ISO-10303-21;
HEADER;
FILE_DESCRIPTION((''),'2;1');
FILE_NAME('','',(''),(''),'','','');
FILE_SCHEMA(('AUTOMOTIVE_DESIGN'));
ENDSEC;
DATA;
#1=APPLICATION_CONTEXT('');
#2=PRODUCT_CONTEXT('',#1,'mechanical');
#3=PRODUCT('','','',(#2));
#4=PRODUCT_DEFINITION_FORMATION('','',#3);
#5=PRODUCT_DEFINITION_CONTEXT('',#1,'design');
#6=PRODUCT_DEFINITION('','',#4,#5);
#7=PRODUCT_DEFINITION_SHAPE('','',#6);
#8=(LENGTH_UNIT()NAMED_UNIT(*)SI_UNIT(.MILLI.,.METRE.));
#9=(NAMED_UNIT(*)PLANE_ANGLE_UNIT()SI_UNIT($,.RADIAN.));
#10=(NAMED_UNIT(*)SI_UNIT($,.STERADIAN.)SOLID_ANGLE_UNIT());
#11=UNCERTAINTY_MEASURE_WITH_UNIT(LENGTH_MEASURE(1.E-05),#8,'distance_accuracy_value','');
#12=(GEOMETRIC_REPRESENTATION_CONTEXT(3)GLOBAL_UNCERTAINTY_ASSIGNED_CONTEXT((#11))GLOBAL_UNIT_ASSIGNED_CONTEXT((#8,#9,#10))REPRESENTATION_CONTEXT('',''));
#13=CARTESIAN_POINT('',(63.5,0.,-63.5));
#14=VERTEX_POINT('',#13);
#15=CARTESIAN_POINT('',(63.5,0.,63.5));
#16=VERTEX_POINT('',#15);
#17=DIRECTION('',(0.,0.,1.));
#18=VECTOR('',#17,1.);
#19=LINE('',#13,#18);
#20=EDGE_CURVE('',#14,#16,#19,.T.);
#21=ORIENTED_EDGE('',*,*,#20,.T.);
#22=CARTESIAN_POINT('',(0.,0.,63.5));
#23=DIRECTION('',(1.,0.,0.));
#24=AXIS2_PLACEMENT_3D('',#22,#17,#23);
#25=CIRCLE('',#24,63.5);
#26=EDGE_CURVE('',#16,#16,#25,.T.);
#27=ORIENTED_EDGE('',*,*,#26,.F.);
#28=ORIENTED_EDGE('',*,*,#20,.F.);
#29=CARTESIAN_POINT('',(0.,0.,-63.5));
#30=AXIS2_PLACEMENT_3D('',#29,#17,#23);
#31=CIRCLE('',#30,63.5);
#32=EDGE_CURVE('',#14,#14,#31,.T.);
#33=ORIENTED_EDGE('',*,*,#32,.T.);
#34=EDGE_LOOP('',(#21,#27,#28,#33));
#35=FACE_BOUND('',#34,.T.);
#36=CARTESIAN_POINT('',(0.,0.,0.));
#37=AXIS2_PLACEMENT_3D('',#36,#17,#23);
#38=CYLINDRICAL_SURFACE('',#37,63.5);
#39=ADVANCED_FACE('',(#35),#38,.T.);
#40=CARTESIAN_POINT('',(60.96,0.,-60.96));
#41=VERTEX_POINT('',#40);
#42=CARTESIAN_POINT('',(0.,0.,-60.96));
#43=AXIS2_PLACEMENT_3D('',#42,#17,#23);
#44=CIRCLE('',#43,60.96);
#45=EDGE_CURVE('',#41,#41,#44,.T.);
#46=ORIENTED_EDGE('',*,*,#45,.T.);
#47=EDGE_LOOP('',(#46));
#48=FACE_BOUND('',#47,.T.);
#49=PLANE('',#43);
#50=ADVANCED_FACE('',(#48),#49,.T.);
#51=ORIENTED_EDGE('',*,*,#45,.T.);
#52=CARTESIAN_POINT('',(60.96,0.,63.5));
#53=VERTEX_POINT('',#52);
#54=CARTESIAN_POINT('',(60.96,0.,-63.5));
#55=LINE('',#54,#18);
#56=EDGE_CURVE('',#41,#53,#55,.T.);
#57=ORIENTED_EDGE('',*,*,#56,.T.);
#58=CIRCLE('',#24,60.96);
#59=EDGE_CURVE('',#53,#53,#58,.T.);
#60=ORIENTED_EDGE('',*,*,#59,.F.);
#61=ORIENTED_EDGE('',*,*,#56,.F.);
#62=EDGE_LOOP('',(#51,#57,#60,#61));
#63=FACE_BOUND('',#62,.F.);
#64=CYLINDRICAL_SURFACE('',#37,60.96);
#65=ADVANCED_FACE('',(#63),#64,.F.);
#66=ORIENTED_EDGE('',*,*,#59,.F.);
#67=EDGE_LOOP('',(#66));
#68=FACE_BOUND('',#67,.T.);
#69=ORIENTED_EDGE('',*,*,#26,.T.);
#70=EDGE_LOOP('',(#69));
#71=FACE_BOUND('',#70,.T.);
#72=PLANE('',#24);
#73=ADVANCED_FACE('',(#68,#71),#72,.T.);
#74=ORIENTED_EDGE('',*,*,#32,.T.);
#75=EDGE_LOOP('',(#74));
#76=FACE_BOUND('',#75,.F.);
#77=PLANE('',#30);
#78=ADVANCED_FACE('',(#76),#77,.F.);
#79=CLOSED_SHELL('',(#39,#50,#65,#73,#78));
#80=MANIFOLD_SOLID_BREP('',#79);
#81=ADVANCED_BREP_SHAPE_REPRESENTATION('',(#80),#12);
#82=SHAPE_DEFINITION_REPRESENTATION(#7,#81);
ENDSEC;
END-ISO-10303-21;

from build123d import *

# Parameters (mm, degrees)
F0_R          = 63.5
F1_DEPTH      = 63.5
F1_DEPTH_BACK = 63.5
F2_T          = -2.54


# Not quite as in the source:
# - the program builds the solid bodies; features that only make, move or delete a surface that nothing else refers to are left out


with BuildPart() as f1:
    # F0 (on Top) → F1 (new body, two sides)
    with BuildSketch(Plane.XY) as f1_sk:
        Circle(F0_R)
    extrude(amount=F1_DEPTH)
    extrude(f1_sk.sketch, amount=-F1_DEPTH_BACK)

    # F2
    f2_openings = [f1.faces().sort_by_distance(p)[0] for p in [
        (0, 0, 63.5),
    ]]
    offset(amount=F2_T, openings=f2_openings)


solid = f1.part
